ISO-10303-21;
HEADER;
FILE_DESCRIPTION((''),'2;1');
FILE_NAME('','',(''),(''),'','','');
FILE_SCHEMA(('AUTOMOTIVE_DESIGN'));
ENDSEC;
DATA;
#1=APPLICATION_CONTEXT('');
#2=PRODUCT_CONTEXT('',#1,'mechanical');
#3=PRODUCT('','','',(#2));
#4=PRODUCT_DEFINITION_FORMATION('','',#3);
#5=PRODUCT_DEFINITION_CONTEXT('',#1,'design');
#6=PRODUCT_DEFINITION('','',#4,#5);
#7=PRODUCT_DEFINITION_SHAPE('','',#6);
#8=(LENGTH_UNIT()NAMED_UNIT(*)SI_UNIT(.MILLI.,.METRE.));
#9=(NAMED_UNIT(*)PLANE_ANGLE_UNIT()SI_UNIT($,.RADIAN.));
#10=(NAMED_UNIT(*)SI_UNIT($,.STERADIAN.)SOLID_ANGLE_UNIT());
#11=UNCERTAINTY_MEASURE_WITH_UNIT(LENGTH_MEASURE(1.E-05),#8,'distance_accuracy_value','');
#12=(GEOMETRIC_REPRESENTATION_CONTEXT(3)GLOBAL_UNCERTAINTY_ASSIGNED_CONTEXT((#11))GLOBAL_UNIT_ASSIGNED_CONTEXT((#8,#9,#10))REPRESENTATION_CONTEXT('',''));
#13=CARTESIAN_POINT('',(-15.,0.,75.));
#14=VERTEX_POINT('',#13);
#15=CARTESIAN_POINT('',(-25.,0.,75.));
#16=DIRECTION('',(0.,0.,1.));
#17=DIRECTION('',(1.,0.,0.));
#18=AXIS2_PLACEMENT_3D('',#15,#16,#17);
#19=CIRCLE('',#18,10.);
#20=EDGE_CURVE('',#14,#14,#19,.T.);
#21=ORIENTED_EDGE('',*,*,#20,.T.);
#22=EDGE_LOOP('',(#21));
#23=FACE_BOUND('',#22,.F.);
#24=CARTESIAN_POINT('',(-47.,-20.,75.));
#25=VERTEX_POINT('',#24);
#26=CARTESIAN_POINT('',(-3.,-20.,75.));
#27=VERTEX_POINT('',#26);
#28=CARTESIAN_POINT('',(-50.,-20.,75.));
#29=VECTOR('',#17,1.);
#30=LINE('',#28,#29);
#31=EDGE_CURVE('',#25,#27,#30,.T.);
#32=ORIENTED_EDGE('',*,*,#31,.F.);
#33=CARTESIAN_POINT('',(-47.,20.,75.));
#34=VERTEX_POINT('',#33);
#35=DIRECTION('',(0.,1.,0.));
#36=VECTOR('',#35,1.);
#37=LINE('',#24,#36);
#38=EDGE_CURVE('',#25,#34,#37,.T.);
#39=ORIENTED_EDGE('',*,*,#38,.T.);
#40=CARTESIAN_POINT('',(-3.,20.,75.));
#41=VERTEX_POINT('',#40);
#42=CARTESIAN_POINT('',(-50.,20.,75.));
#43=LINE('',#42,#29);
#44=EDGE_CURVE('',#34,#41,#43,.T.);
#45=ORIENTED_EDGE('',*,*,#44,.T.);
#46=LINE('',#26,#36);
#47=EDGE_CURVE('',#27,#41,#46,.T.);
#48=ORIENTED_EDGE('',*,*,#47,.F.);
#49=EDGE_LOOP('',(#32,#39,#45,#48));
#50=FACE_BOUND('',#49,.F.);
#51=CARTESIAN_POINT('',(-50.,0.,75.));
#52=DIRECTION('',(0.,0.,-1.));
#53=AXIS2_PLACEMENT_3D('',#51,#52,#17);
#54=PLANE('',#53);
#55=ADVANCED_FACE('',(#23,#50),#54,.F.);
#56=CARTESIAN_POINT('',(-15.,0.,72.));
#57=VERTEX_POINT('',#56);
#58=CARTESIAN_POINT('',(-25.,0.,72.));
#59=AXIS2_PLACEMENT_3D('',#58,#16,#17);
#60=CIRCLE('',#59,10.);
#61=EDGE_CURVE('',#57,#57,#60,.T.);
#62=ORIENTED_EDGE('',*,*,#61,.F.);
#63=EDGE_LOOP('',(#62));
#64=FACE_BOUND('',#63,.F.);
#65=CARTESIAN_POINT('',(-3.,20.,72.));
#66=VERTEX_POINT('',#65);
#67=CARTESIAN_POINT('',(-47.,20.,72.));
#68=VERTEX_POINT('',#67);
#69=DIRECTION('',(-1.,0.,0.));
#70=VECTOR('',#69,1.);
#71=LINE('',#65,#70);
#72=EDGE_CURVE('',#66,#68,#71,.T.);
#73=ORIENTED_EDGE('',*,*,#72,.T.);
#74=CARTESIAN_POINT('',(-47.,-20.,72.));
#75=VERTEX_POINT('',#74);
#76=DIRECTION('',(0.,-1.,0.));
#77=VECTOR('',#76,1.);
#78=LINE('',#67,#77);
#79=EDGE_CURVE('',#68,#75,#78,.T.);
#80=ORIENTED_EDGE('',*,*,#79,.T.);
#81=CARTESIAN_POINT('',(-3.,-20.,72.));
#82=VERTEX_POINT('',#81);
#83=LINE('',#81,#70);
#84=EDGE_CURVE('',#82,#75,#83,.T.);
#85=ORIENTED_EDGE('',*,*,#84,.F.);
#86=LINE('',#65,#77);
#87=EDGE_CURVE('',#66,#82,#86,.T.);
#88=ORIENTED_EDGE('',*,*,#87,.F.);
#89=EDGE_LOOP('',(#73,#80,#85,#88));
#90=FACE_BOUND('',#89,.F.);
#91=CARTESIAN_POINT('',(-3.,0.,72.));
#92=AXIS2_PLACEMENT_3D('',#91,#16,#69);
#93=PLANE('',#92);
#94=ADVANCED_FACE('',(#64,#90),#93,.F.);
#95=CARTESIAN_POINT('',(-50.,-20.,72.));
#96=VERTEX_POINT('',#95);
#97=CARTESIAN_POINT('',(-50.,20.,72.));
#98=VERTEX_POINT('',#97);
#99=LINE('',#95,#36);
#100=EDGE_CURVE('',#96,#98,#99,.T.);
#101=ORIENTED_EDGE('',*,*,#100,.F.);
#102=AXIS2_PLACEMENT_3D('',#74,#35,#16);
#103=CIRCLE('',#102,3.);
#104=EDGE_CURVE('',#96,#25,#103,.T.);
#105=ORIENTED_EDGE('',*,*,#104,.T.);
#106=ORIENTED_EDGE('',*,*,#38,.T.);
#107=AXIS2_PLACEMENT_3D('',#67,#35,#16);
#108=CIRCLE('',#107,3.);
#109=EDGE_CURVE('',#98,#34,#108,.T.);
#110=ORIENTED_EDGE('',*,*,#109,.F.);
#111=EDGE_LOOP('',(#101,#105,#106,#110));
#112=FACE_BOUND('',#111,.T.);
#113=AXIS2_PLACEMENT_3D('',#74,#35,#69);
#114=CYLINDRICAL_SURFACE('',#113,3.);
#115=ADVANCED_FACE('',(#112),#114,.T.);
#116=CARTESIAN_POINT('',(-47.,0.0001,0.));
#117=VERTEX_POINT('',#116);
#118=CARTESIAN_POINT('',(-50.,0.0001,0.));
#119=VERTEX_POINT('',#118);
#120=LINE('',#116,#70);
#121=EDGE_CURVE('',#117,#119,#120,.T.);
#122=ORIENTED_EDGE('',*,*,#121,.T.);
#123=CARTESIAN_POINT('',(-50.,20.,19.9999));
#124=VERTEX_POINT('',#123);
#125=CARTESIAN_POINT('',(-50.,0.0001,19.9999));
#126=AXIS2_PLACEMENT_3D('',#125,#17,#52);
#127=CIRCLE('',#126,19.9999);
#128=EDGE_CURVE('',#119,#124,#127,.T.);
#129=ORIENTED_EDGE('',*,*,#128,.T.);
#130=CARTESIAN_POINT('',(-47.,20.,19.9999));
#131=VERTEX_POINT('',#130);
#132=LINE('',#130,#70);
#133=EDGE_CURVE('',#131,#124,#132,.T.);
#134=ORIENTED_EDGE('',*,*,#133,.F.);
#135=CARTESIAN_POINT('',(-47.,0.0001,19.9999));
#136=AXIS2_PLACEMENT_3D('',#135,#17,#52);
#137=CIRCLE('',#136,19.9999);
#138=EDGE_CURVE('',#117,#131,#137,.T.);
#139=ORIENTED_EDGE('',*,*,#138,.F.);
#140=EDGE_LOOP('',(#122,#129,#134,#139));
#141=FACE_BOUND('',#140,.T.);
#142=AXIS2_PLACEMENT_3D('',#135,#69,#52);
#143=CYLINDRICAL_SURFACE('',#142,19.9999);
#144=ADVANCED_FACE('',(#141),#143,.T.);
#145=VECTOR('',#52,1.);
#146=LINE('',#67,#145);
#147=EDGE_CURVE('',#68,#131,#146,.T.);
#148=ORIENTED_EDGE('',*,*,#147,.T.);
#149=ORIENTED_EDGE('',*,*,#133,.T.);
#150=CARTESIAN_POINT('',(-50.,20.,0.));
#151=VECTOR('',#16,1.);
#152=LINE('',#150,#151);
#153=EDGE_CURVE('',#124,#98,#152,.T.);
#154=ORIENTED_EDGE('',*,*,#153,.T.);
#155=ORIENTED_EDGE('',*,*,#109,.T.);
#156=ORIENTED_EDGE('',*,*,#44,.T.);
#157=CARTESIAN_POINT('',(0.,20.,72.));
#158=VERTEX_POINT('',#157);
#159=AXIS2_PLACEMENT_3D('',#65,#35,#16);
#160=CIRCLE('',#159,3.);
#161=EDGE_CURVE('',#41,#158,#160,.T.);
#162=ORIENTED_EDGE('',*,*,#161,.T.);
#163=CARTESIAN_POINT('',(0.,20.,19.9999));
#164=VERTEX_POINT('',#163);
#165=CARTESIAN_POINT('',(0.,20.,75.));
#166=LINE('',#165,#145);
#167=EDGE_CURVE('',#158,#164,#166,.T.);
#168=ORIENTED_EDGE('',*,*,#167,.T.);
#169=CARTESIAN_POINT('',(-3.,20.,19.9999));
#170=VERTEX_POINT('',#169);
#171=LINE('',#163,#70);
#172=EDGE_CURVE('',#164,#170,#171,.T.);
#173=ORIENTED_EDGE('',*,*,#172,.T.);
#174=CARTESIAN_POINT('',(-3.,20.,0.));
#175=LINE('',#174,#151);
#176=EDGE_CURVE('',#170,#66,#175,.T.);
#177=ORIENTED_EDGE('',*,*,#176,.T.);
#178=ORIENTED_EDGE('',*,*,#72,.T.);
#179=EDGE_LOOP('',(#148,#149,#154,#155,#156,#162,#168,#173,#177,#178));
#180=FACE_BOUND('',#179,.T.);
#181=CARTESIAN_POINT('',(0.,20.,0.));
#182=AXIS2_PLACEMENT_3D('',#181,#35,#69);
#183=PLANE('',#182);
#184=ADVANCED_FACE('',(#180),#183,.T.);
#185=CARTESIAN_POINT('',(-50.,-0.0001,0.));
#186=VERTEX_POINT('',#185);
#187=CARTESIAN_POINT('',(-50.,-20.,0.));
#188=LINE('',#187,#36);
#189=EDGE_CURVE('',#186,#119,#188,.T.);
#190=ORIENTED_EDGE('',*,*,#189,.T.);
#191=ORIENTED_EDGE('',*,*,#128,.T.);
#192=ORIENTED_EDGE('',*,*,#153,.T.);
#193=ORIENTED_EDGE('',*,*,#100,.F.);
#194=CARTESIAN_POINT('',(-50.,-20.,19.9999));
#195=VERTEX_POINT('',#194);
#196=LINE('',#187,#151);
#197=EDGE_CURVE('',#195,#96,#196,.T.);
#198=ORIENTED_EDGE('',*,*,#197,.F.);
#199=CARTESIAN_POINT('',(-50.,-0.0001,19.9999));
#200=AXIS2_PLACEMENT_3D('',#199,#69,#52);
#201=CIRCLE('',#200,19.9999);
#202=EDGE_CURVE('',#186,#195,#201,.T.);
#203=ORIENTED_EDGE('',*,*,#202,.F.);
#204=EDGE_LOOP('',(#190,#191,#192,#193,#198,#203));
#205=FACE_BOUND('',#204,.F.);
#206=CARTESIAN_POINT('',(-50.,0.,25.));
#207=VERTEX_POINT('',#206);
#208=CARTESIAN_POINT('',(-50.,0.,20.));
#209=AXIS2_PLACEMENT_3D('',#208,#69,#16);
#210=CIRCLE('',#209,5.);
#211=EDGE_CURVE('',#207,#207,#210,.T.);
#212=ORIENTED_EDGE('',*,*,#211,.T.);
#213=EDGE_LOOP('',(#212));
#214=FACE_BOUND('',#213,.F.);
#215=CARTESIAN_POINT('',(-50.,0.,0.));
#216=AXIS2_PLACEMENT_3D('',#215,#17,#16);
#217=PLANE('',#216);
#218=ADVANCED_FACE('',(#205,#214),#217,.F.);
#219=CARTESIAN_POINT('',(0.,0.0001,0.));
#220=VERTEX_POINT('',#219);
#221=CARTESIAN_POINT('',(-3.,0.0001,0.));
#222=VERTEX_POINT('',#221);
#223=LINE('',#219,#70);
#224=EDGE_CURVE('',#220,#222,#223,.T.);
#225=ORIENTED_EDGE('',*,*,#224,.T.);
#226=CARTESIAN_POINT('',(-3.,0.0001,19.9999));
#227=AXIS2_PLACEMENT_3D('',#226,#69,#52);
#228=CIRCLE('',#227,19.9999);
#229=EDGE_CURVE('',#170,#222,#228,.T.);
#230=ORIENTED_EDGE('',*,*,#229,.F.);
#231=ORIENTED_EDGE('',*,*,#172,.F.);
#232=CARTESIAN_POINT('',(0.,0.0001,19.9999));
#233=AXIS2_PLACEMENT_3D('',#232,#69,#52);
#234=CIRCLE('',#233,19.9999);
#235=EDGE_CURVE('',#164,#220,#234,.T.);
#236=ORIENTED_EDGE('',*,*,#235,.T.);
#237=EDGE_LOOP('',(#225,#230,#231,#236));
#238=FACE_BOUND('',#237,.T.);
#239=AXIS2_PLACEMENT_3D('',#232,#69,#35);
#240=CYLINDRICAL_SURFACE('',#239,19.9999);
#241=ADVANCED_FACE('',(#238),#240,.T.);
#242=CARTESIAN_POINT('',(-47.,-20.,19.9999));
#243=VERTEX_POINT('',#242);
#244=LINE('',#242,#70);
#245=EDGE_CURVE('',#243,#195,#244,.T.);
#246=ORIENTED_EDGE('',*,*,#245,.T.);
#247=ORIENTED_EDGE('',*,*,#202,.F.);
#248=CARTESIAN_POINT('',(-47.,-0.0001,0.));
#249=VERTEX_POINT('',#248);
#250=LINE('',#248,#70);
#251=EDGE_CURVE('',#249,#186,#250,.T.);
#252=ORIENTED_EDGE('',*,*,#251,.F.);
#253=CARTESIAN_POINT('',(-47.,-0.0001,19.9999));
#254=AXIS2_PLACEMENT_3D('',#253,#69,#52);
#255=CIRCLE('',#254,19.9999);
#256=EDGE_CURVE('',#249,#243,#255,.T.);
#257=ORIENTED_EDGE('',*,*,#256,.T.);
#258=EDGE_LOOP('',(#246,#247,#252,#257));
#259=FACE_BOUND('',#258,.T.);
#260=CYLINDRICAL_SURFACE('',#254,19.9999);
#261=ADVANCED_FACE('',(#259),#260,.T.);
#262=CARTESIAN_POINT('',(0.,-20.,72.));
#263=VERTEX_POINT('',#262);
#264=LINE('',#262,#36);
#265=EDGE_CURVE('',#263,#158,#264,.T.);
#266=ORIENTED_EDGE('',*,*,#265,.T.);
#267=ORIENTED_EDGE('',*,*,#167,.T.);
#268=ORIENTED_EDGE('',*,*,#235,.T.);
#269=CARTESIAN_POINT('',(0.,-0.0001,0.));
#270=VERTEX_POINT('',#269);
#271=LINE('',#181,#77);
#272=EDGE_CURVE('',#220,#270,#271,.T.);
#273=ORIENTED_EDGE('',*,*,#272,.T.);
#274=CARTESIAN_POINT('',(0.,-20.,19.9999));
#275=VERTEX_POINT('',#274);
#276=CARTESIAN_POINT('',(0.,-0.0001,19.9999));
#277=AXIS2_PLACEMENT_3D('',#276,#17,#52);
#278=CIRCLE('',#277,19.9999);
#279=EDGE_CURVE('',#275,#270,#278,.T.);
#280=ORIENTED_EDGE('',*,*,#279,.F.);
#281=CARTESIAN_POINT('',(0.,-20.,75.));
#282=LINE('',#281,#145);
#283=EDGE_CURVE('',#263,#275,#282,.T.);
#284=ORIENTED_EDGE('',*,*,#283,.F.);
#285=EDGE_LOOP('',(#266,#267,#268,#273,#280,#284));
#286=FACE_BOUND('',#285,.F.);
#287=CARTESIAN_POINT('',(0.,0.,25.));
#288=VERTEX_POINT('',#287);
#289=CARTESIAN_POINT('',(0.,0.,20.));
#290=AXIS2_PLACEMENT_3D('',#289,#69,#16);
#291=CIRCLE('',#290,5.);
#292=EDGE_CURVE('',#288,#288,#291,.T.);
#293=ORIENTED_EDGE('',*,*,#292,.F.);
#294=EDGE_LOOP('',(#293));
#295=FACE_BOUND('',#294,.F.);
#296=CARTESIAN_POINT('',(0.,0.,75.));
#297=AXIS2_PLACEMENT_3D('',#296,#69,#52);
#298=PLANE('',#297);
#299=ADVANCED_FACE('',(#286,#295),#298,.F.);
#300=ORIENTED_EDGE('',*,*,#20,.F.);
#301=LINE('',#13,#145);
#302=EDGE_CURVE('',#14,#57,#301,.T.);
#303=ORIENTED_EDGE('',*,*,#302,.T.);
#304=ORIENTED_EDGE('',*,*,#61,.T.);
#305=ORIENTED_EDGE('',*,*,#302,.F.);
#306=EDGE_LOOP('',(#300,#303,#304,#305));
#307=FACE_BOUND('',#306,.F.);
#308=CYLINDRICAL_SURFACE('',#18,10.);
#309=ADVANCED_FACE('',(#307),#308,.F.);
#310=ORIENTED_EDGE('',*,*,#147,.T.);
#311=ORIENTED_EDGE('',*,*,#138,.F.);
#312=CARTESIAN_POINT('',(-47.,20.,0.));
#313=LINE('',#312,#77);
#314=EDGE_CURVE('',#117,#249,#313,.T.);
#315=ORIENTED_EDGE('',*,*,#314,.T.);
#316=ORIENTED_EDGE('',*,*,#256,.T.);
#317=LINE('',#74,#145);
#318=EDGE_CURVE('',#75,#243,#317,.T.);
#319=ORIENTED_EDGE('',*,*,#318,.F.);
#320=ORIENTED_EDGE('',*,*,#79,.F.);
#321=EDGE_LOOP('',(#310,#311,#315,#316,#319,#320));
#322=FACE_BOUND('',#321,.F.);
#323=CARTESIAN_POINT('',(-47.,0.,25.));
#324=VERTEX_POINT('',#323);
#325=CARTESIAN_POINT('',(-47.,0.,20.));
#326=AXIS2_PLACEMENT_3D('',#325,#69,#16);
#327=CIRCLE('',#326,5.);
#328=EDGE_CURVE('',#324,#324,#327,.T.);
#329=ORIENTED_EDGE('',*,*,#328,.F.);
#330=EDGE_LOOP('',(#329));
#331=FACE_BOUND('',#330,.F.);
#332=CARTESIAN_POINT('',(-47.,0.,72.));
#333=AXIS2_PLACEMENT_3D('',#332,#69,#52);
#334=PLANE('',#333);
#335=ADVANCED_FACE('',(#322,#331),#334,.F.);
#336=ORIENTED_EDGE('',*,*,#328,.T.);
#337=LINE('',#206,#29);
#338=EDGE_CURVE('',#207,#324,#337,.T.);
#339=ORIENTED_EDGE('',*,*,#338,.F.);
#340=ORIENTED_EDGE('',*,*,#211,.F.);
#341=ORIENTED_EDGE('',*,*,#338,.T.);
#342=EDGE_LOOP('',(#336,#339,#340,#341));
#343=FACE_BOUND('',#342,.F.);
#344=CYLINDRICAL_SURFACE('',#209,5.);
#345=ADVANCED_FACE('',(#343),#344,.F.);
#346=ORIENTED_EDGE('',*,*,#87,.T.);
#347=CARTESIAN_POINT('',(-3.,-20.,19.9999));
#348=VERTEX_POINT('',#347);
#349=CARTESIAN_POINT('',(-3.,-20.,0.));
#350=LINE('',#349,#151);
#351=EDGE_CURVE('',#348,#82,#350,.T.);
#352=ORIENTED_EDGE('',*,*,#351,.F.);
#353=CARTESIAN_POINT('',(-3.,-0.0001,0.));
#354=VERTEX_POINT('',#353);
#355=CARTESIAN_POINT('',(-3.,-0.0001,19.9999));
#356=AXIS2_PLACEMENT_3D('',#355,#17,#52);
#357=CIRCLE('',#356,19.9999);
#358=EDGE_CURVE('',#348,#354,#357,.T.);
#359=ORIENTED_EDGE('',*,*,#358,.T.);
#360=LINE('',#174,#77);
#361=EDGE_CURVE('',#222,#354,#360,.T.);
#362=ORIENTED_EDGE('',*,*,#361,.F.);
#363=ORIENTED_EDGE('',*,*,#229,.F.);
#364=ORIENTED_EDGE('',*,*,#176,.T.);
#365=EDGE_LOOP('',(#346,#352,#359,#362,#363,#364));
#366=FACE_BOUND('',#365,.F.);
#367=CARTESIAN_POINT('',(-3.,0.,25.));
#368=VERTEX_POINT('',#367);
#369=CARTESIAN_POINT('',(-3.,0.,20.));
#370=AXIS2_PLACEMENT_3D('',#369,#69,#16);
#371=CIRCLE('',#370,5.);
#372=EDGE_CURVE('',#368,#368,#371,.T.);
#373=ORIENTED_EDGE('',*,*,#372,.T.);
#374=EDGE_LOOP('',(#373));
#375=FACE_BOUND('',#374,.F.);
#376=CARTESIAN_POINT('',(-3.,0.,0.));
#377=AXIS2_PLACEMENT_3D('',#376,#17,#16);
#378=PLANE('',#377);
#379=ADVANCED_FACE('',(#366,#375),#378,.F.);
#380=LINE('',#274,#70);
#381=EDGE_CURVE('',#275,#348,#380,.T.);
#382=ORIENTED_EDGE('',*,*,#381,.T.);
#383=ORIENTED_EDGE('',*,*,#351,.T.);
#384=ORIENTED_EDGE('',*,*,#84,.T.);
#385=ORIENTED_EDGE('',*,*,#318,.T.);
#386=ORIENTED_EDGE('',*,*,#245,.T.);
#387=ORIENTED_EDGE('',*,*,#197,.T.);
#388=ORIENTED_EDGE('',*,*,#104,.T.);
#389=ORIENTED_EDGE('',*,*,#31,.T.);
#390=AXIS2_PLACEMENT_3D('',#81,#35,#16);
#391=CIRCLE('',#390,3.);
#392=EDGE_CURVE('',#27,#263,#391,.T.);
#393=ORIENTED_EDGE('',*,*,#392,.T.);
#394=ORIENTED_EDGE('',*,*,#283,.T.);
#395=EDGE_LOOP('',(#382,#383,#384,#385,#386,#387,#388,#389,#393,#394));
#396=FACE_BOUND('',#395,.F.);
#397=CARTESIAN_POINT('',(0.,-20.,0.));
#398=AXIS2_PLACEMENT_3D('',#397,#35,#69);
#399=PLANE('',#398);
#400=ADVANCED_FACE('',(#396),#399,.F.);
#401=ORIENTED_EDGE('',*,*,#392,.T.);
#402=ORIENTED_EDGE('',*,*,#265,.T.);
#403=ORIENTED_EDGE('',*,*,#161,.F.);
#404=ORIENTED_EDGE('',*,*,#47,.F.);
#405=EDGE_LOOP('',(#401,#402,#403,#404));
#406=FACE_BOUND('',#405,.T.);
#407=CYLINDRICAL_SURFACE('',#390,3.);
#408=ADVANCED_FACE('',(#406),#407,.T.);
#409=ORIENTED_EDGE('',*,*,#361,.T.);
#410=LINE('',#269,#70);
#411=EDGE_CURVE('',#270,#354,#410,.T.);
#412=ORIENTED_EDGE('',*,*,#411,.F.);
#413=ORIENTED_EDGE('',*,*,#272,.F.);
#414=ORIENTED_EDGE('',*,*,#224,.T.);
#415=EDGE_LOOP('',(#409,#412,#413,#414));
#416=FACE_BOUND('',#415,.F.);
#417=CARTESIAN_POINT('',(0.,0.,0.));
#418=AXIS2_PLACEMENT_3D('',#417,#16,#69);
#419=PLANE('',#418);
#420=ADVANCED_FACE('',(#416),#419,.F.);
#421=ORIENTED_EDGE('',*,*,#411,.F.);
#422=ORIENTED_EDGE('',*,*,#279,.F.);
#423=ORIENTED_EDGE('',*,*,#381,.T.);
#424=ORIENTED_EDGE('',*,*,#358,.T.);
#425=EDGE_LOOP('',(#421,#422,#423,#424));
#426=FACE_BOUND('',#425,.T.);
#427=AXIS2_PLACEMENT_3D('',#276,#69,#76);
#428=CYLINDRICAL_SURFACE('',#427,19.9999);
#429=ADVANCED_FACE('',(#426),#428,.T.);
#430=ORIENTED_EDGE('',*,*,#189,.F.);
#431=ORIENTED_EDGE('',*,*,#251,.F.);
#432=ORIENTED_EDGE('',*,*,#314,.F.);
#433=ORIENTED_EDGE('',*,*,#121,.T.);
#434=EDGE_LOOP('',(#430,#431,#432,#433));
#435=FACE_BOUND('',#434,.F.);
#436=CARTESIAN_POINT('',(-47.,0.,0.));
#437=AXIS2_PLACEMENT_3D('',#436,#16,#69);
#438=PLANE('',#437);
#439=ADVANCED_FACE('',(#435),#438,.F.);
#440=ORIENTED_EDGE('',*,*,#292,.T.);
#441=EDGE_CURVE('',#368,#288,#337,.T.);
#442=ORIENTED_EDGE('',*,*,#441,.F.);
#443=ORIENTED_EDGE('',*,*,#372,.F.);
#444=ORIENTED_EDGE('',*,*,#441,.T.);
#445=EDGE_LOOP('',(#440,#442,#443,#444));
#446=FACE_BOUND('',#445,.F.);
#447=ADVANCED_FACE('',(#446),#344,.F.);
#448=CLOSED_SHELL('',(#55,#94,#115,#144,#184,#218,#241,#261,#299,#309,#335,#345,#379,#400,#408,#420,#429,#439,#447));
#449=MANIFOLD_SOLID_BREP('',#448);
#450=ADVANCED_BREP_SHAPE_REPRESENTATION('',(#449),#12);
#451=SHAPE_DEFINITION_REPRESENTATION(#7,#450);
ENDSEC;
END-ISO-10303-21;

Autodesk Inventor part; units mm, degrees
ref_plane "YZ Plane" through (0, 0, 0) normal (1, 0, 0) x (0, 1, 0)
ref_plane "XZ Plane" through (0, 0, 0) normal (0, 1, 0) x (-1, 0, 0)
ref_plane "XY Plane" through (0, 0, 0) normal (0, 0, 1) x (1, 0, 0)
sketch "Sketch1" plane through (0, 0, 0) normal (0, 1, 0) x (-1, 0, 0)
  line L0 (50, 0) -> (50, 75)
  line L1 (50, 75) -> (0, 75)
  line L2 (0, 75) -> (0, 0)
  line L3 (3, 0) -> (3, 72)
  line L4 (3, 72) -> (47, 72)
  line L5 (47, 72) -> (47, 0)
  line L6 (0, 0) -> (3, 0)
  line L7 (47, 0) -> (50, 0)
  dimension "d0" = 50
  dimension "d1" = 75
  dimension "d2" = 3
extrude "Extrusion1" add sketch "Sketch1" along normal mid plane 40
fillet "Fillet1" radius 20 4 edges at (-48.5, 20, 0) (-48.5, -20, 0) (-1.5, 20, 0) (-1.5, -20, 0)
fillet "Fillet2" radius 3 2 edges at (-50, 0, 75) (0, 0, 75)
sketch "Sketch2" plane through (-50, 0, 20) normal (-1, 0, 0) x (0, 0, 1)
  circle A0 centre (0, 0) radius 5
  point P0 (-20, 0)
  dimension "d7" = 10
extrude "Extrusion2" cut sketch "Sketch2" against normal through all
sketch "Sketch3" plane through (-47, 20, 75) normal (0, 0, 1) x (1, 0, 0)
  circle A0 centre (22, -20) radius 10
  point P0 (47, -20)
  dimension "d10" = 20
extrude "Extrusion3" cut sketch "Sketch3" against normal blind 10
